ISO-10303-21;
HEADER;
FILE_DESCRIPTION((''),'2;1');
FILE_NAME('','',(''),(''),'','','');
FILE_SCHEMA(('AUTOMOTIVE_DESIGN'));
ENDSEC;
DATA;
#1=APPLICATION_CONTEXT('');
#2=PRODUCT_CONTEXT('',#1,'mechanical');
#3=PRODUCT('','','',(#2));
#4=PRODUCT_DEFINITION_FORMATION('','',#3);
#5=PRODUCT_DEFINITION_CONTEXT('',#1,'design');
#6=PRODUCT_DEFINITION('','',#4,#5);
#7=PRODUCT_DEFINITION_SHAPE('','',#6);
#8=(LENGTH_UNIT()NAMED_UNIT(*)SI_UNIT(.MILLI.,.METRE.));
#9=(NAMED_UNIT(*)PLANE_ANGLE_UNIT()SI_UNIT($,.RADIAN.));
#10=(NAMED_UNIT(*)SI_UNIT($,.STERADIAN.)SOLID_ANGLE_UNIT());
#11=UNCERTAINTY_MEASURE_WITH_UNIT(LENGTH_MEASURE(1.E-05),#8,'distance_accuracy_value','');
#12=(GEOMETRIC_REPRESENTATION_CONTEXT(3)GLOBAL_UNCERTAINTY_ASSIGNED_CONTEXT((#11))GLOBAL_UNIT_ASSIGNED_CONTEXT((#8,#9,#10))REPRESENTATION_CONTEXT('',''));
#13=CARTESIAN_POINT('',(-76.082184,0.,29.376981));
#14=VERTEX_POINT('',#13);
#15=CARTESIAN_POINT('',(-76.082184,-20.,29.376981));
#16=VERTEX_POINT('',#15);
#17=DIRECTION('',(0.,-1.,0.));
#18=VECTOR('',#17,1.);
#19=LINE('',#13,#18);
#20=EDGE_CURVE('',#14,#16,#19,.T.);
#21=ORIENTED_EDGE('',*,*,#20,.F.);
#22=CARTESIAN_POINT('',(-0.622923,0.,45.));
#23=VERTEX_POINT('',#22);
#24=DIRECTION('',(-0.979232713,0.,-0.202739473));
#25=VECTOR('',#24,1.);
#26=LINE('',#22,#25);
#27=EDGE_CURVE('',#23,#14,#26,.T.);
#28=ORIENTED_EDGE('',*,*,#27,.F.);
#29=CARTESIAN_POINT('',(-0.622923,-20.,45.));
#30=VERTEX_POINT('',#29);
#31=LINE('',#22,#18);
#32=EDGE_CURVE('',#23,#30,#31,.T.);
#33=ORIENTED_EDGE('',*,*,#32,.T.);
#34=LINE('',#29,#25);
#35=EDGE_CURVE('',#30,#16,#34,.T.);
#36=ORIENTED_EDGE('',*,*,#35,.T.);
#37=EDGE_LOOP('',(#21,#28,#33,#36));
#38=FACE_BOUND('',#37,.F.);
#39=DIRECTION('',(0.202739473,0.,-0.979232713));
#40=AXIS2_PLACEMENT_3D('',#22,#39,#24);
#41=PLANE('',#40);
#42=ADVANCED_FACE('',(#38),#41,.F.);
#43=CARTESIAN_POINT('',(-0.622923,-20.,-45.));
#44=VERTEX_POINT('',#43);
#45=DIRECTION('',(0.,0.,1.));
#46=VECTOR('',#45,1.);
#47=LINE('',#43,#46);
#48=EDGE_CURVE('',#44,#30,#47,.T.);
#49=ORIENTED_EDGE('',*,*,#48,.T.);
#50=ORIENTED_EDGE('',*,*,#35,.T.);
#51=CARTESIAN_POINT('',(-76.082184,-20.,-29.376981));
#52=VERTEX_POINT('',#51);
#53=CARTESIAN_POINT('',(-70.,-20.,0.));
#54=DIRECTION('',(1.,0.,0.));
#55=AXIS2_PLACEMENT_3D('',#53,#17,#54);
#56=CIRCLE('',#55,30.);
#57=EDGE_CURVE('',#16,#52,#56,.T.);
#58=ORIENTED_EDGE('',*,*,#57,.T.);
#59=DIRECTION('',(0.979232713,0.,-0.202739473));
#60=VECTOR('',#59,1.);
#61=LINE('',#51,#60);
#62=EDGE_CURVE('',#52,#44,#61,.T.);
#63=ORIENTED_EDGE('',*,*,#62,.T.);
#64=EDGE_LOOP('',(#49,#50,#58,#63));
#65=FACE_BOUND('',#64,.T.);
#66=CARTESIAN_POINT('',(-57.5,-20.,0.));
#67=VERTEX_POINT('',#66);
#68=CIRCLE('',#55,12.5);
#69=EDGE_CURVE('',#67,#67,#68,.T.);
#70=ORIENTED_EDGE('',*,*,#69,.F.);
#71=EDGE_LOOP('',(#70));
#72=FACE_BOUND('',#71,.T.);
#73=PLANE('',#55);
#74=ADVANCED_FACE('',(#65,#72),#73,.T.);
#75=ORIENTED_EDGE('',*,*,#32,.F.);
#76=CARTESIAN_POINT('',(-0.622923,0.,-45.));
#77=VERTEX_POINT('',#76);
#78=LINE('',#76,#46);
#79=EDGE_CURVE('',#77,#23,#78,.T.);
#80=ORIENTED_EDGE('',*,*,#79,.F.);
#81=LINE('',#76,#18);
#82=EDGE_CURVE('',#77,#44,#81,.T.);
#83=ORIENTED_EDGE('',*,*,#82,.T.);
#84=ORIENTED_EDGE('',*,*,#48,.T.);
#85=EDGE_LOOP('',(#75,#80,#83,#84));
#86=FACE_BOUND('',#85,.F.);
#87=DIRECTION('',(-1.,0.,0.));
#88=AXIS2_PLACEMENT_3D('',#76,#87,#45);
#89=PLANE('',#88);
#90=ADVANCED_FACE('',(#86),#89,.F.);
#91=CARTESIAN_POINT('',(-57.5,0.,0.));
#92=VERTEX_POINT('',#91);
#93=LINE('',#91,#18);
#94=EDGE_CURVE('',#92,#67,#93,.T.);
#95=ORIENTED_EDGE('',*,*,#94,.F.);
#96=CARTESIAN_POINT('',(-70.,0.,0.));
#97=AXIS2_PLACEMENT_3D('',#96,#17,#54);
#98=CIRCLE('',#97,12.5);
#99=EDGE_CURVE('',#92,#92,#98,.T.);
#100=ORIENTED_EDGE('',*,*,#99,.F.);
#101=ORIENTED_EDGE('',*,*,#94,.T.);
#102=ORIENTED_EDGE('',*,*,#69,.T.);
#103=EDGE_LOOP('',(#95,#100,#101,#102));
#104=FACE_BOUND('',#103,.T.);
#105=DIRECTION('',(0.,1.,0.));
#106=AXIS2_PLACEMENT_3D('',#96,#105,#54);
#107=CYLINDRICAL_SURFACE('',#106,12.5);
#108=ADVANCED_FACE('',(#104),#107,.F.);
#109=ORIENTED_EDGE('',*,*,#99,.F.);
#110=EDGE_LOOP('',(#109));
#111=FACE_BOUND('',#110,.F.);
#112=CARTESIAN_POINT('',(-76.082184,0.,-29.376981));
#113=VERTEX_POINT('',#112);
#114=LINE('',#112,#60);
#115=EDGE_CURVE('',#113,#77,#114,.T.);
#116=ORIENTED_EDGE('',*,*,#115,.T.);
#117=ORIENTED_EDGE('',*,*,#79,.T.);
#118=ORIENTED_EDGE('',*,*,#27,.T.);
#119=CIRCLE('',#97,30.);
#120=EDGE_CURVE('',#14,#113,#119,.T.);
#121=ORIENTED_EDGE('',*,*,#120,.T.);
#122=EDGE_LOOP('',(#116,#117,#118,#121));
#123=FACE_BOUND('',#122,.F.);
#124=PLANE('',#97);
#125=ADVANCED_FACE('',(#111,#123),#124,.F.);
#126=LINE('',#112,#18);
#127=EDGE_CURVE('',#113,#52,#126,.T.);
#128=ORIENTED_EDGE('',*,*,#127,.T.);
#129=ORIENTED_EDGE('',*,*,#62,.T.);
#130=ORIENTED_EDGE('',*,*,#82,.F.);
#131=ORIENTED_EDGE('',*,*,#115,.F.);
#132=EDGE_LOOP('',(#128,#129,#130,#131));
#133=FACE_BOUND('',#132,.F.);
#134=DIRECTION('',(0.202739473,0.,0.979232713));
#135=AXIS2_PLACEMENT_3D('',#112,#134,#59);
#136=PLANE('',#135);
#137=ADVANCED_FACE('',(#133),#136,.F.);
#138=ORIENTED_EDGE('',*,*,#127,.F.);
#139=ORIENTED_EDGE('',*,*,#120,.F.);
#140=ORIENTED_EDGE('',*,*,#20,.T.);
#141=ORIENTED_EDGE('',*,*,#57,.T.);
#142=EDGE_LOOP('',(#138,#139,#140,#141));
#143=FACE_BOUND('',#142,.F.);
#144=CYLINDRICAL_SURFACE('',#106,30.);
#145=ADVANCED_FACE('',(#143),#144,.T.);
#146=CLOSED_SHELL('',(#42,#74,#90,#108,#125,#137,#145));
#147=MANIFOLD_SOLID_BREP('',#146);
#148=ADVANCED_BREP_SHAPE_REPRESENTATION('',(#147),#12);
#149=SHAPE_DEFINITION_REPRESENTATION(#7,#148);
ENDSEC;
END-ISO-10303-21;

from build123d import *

# Parameters (mm, degrees)
F1_DEPTH = 20
F0_R     = 12.5
F2_DEPTH = 20


# Not quite as in the source:
# - a feature names something its author has since deleted; it is built from what else it names


with BuildPart() as f1:
    # F0 (on Front) → F1 (new body)
    with BuildSketch(Plane.XZ):
        with BuildLine():
            Line((-0.6229226271, -45), (-0.6229226271, 45))
            Line((-0.6229226271, 45), (-76.0821841814, 29.3769813899))
            ThreePointArc((-76.0821841814, 29.3769813899), (-51.0588480477, 23.2644097866), (-40, 0))
            ThreePointArc((-40, 0), (-51.0588480477, -23.2644097866), (-76.0821841814, -29.3769813899))
            Line((-76.0821841814, -29.3769813899), (-0.6229226271, -45))
        make_face()
    extrude(amount=F1_DEPTH)

    # F0 (on Front) → F2 (join)
    with BuildSketch(Plane.XZ):
        with BuildLine():
            ThreePointArc((-40, 0), (-51.0588480477, 23.2644097866), (-76.0821841814, 29.3769813899))
            ThreePointArc((-76.0821841814, 29.3769813899), (-100, 0), (-76.0821841814, -29.3769813899))
            ThreePointArc((-76.0821841814, -29.3769813899), (-51.0588480477, -23.2644097866), (-40, 0))
        make_face()
        with Locations((-70, 0)):
            Circle(F0_R, mode=Mode.SUBTRACT)
    extrude(amount=F2_DEPTH)


solid = f1.part
